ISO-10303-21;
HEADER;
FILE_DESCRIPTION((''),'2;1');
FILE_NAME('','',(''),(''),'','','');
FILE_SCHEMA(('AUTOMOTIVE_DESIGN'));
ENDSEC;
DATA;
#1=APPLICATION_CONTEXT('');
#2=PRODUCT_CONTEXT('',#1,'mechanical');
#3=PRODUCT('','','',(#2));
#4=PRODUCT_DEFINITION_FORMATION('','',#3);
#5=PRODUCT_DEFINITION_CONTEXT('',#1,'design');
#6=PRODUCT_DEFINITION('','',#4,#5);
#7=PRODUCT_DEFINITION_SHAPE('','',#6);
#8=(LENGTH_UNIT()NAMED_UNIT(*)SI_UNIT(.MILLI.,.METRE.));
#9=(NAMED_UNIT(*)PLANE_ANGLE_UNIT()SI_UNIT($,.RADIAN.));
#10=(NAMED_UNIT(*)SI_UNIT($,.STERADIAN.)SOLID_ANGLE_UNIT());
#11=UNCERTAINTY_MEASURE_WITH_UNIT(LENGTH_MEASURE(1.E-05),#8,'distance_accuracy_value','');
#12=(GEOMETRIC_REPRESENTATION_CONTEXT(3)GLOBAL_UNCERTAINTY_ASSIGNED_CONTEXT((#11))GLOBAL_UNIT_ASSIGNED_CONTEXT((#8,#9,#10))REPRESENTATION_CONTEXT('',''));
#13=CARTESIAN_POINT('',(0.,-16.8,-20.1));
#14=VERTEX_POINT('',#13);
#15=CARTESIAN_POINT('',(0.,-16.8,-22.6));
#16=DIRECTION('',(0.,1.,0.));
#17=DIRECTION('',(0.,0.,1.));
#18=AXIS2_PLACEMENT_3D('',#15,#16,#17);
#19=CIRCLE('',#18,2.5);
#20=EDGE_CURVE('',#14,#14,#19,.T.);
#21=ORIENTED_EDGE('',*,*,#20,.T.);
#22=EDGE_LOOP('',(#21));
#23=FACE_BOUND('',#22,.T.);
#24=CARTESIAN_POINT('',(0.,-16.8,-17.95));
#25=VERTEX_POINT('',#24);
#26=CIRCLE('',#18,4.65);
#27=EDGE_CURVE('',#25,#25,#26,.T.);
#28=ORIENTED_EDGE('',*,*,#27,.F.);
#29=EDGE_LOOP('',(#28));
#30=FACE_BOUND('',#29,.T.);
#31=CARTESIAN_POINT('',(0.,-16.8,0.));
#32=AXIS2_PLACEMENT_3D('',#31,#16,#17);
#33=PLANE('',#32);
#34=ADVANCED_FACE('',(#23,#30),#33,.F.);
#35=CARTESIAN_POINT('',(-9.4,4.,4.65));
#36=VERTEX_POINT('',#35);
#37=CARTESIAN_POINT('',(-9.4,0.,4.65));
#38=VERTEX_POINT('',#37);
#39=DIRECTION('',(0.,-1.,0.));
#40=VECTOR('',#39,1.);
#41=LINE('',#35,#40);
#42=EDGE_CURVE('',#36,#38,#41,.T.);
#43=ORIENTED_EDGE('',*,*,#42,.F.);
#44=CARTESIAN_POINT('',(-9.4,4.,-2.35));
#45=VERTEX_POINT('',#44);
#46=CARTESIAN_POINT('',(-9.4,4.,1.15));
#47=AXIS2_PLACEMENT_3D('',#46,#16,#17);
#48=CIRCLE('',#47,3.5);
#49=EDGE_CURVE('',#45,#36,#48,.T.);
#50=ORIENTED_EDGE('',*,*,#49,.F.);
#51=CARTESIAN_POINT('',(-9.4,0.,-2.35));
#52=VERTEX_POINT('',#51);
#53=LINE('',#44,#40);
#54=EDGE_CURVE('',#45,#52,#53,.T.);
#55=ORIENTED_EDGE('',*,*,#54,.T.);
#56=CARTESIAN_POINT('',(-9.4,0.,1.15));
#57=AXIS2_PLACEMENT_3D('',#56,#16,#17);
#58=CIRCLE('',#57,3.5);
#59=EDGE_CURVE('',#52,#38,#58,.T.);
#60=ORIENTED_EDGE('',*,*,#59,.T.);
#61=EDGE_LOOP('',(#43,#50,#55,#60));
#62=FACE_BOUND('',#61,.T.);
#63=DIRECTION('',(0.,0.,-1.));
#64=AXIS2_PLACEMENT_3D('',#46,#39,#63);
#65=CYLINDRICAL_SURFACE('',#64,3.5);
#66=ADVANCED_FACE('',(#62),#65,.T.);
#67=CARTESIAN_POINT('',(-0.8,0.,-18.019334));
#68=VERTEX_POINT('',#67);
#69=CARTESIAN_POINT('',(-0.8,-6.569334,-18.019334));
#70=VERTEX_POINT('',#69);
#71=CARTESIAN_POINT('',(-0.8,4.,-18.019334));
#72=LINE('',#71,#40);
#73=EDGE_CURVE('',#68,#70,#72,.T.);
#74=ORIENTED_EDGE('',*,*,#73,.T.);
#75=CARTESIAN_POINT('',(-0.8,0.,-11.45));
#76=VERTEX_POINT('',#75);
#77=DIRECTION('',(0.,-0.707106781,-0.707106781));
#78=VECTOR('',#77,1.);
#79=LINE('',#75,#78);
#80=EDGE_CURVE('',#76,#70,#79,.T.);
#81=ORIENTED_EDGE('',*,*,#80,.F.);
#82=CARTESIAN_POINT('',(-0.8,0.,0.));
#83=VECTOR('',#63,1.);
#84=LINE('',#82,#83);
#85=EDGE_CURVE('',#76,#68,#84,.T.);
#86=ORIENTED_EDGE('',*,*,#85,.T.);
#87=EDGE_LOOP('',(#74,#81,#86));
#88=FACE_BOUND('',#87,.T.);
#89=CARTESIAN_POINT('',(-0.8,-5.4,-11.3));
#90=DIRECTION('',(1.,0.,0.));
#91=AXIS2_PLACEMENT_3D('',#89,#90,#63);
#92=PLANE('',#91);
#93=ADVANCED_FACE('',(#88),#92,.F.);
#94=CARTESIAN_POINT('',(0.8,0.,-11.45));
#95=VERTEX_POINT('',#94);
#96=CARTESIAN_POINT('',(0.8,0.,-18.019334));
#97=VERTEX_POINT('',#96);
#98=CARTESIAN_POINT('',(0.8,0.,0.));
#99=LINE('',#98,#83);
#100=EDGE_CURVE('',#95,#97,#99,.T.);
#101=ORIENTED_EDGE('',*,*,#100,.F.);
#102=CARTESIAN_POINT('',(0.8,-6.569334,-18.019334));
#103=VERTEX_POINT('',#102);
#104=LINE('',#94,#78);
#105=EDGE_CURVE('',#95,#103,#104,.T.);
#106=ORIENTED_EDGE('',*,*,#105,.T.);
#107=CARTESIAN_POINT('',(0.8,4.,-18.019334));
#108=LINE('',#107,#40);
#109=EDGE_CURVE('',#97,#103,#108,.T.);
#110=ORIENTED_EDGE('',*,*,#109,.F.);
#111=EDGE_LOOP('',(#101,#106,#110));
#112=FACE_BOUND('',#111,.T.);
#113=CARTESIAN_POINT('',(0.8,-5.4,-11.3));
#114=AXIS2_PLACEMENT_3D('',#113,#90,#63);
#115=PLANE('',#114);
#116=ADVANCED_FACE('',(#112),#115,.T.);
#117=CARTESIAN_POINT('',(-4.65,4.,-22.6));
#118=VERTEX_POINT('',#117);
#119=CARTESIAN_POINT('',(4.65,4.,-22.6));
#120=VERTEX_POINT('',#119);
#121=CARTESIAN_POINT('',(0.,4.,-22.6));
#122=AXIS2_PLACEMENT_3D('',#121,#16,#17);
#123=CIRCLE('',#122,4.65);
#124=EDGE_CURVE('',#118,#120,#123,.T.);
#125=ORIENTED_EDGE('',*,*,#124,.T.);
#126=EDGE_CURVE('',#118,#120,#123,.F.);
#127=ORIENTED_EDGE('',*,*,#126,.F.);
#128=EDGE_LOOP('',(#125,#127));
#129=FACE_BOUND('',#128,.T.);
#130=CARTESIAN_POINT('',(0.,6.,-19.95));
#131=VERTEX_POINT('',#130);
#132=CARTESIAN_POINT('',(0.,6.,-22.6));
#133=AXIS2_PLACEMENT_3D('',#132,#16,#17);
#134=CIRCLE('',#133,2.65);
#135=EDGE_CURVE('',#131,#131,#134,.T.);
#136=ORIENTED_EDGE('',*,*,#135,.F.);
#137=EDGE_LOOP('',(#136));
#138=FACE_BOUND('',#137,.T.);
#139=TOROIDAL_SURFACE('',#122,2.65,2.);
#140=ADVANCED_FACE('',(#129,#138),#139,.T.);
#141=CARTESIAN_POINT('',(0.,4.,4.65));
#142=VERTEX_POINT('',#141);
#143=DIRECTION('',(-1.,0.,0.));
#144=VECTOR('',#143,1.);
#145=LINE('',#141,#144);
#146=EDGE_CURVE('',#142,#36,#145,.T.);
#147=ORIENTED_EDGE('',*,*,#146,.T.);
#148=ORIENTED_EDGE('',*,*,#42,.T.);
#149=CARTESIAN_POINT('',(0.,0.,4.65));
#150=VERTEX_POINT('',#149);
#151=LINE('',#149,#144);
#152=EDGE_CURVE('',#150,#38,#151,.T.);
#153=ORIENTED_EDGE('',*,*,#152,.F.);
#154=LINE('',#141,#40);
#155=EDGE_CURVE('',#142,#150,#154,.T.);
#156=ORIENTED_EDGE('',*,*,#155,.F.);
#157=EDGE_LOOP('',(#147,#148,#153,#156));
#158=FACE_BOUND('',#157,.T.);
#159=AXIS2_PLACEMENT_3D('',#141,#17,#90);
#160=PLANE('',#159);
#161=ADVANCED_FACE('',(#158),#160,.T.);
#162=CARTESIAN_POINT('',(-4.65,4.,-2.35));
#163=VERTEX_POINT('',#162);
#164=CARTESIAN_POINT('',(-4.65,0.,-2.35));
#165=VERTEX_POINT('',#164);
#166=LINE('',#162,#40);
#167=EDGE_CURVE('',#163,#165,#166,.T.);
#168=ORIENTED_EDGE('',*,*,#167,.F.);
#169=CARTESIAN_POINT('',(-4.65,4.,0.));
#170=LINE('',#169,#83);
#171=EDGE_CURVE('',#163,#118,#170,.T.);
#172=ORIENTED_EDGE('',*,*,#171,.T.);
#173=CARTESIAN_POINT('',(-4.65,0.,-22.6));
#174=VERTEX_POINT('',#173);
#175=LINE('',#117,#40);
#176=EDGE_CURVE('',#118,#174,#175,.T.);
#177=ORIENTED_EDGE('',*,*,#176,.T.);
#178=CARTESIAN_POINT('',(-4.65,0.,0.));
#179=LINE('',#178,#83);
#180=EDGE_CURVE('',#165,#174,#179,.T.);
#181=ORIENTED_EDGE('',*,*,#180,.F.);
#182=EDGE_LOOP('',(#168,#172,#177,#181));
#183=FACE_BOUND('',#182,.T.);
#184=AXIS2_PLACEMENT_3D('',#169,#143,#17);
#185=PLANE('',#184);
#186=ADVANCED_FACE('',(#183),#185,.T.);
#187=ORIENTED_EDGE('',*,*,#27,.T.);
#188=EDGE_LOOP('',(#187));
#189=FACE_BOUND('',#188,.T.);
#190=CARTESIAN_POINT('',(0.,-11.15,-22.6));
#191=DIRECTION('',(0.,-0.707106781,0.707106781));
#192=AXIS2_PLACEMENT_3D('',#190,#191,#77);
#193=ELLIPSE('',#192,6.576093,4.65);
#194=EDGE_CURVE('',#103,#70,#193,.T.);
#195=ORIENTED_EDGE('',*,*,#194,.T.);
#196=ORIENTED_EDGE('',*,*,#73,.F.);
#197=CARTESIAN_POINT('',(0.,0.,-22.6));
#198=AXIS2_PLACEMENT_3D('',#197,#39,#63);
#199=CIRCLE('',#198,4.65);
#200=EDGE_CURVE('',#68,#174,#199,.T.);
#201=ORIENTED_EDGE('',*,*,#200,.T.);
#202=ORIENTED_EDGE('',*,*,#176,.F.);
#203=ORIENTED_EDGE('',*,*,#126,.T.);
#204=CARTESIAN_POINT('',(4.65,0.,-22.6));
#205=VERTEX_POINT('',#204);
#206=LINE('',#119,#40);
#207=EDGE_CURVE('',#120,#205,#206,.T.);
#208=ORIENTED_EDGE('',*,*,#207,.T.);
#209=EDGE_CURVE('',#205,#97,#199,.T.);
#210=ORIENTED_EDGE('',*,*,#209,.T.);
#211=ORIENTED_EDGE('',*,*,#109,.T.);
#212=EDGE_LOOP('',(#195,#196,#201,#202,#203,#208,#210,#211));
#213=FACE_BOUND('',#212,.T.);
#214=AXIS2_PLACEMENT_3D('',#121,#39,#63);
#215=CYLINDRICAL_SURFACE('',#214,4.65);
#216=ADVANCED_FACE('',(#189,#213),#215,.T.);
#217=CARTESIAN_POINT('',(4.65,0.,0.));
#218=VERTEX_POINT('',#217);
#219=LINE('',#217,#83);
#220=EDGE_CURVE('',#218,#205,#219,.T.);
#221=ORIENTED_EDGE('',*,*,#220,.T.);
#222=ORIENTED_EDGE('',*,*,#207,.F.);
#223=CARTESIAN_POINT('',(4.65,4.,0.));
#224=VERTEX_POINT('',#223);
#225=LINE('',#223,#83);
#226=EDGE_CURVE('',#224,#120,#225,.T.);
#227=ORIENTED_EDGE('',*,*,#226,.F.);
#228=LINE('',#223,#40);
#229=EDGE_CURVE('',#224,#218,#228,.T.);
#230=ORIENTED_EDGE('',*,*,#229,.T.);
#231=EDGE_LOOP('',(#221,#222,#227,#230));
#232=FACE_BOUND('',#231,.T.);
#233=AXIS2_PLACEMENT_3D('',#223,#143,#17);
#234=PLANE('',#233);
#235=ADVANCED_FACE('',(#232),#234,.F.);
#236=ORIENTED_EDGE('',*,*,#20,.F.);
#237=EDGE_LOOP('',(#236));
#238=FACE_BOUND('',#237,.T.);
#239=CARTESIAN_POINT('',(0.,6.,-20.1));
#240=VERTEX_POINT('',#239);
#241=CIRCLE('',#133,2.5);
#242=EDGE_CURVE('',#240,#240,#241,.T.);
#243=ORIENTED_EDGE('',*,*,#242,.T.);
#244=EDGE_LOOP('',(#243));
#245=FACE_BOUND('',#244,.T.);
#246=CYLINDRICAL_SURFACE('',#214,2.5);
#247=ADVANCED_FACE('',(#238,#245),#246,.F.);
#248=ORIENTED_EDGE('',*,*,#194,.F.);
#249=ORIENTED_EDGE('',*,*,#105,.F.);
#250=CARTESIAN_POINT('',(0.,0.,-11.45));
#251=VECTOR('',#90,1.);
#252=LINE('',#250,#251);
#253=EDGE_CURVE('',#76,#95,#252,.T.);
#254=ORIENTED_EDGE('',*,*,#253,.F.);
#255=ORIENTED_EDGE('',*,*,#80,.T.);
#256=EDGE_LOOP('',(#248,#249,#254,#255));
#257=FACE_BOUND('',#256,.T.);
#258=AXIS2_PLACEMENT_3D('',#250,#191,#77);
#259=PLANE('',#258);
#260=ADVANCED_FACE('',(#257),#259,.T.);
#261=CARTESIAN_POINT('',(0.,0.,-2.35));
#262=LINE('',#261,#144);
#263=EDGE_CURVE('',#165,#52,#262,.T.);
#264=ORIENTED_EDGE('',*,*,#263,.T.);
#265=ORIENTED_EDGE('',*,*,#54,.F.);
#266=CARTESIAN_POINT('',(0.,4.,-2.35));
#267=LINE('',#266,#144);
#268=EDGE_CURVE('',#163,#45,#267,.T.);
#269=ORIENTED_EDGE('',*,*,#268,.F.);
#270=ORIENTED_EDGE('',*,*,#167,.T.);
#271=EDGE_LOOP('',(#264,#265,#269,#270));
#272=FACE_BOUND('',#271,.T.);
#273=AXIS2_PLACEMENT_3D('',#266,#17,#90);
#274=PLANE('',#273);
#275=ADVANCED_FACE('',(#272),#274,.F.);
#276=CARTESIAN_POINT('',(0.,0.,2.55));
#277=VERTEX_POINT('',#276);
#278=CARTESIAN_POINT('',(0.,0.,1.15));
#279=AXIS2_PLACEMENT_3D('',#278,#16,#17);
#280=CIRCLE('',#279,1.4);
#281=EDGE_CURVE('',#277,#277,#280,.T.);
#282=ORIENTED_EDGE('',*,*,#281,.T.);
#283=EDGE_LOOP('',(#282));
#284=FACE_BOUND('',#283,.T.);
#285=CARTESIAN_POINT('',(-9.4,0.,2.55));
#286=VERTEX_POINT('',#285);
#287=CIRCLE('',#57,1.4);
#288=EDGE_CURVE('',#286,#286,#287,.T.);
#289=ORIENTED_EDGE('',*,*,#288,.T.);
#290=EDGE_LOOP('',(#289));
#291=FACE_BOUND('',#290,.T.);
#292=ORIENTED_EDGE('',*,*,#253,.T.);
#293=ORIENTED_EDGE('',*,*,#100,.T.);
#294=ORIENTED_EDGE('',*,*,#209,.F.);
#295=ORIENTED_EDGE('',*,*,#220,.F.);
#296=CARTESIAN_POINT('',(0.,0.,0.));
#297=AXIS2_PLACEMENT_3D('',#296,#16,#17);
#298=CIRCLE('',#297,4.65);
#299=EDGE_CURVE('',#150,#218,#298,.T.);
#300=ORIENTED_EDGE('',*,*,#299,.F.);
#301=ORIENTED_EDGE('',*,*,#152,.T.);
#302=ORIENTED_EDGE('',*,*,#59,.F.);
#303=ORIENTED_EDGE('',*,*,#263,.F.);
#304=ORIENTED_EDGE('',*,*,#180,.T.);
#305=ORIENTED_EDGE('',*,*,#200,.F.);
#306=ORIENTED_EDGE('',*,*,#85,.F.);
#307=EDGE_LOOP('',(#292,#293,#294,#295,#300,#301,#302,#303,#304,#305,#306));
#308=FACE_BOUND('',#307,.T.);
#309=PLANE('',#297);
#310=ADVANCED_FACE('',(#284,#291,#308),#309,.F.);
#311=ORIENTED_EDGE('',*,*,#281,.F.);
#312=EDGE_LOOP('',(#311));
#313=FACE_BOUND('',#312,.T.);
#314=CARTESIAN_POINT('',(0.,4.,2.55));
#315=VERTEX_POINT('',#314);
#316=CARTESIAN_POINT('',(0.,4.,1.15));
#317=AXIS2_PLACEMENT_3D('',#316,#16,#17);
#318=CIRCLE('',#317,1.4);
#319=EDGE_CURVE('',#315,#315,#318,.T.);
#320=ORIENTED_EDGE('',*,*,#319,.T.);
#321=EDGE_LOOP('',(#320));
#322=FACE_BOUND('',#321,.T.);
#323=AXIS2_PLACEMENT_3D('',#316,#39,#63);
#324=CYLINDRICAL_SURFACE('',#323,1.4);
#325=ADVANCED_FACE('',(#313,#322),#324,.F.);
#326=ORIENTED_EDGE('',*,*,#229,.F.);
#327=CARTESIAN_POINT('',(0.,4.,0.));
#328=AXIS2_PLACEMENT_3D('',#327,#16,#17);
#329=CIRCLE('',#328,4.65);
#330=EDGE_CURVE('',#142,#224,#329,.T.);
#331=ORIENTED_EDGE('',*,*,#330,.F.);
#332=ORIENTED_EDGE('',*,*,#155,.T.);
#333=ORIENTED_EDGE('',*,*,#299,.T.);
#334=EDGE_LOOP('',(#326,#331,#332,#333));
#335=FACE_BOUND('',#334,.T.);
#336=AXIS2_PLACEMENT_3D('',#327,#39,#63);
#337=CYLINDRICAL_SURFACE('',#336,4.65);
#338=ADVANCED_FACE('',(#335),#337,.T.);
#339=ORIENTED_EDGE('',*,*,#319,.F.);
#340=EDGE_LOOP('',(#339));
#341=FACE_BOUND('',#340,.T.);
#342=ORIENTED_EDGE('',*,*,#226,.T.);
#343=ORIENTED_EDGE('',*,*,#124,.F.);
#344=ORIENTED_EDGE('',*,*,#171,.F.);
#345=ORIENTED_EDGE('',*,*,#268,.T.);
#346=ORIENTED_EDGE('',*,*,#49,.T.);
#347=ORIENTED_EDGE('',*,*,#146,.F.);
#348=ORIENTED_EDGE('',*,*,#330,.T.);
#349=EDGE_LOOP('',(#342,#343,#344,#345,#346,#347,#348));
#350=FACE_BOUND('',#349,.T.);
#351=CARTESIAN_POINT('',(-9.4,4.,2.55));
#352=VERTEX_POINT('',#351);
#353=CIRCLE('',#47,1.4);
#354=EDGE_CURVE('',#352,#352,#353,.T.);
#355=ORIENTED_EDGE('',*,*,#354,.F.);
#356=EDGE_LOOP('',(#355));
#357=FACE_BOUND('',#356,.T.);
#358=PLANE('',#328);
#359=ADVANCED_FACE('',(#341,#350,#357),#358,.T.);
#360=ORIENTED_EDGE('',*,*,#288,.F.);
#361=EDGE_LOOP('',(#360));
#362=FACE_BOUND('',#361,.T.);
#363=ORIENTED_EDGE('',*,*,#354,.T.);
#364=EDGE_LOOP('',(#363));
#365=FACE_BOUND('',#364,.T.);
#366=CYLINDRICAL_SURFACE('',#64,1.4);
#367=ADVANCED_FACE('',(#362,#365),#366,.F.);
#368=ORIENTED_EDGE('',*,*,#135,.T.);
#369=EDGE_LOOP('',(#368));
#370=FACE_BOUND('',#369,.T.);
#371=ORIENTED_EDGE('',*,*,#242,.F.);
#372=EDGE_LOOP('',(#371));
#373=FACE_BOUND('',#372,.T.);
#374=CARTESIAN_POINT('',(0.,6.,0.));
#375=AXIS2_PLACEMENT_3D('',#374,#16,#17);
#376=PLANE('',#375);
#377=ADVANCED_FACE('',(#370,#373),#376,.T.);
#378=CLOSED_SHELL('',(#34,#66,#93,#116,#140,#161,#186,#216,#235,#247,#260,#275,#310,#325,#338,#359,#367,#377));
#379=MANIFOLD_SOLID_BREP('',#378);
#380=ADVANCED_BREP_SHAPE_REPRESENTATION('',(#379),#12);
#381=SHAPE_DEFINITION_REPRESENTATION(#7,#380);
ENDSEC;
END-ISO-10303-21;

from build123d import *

# Parameters (mm, degrees)
SKETCH2_R           = 1.4
SKETCH2_R_2         = 2.5
BOSS_EXTRUDE1_DEPTH = 4
BOSS_EXTRUDE2_START = 16.8
SKETCH3_R           = 4.65
SKETCH3_R_2         = 2.5
BOSS_EXTRUDE2_DEPTH = 16.8
SKETCH5_R           = 4.65
SKETCH5_R_2         = 2.5
BOSS_EXTRUDE3_DEPTH = 2
FILLET1_R           = 2
RIB1_REACH          = 36.514
SKETCH6_WALL_W      = 80.220281068
SKETCH6_WALL_H      = 1.6


with BuildPart() as part:
    # Sketch2 → Boss-Extrude1 (new body)
    with BuildSketch(Plane(origin=(0, 0, 0), x_dir=(1, 0, 0), z_dir=(0, 1, 0))):
        with BuildLine():
            Line((-9.4, -4.65), (0, -4.65))
            ThreePointArc((0, -4.65), (3.288046533, -3.288046533), (4.65, 0))
            Line((4.65, 0), (4.65, 22.6))
            ThreePointArc((4.65, 22.6), (0, 27.25), (-4.65, 22.6))
            Line((-4.65, 22.6), (-4.65, 2.35))
            Line((-4.65, 2.35), (-9.4, 2.35))
            ThreePointArc((-9.4, 2.35), (-12.9, -1.15), (-9.4, -4.65))
        make_face()
        with Locations(Location((-9.4, -1.15, 0), (0, 0, 270))):
            Circle(SKETCH2_R, mode=Mode.SUBTRACT)
        with Locations(Location((0, -1.15, 0), (0, 0, 270))):
            Circle(SKETCH2_R, mode=Mode.SUBTRACT)
        with Locations(Location((0, 22.6, 0), (0, 0, 270))):
            Circle(SKETCH2_R_2, mode=Mode.SUBTRACT)
    extrude(amount=BOSS_EXTRUDE1_DEPTH)

    # Sketch3 → Boss-Extrude2 (add)
    with BuildSketch(Plane.XZ.offset(BOSS_EXTRUDE2_START)):
        with Locations((0, -22.6)):
            Circle(SKETCH3_R)
        with Locations(Location((0, -22.6, 0), (0, 0, 90))):
            Circle(SKETCH3_R_2, mode=Mode.SUBTRACT)
    extrude(amount=-BOSS_EXTRUDE2_DEPTH)

    # Sketch5 → Boss-Extrude3 (add)
    with BuildSketch(Plane(origin=(0, 4, 0), x_dir=(1, 0, 0), z_dir=(0, 1, 0))):
        with Locations(Location((0, 22.6, 0), (0, 0, 270))):
            Circle(SKETCH5_R)
        with Locations(Location((0, 22.6, 0), (0, 0, 270))):
            Circle(SKETCH5_R_2, mode=Mode.SUBTRACT)
    extrude(amount=BOSS_EXTRUDE3_DEPTH)

    # Fillet1
    fillet1_edges = [part.edges().sort_by_distance(p)[0] for p in [
        (0, 6, -27.25),
    ]]
    fillet(fillet1_edges, radius=FILLET1_R - 0.0001)  # a hair under: the kernel refuses the full size

    # Sketch6 wall → Rib1 (add, up to next)
    with BuildSketch(Plane(origin=(0, -3.25, -14.7), x_dir=(0, -0.707106781187, -0.707106781187), z_dir=(0, 0.707106781187, -0.707106781187)), mode=Mode.PRIVATE) as rib1_sk1:
        Rectangle(SKETCH6_WALL_W, SKETCH6_WALL_H)
    rib1_tool1 = extrude(rib1_sk1.sketch, amount=RIB1_REACH, mode=Mode.PRIVATE) - part.part
    add(rib1_tool1.solids().sort_by_distance((0, -3.25, -14.7))[0])


solid = part.part
